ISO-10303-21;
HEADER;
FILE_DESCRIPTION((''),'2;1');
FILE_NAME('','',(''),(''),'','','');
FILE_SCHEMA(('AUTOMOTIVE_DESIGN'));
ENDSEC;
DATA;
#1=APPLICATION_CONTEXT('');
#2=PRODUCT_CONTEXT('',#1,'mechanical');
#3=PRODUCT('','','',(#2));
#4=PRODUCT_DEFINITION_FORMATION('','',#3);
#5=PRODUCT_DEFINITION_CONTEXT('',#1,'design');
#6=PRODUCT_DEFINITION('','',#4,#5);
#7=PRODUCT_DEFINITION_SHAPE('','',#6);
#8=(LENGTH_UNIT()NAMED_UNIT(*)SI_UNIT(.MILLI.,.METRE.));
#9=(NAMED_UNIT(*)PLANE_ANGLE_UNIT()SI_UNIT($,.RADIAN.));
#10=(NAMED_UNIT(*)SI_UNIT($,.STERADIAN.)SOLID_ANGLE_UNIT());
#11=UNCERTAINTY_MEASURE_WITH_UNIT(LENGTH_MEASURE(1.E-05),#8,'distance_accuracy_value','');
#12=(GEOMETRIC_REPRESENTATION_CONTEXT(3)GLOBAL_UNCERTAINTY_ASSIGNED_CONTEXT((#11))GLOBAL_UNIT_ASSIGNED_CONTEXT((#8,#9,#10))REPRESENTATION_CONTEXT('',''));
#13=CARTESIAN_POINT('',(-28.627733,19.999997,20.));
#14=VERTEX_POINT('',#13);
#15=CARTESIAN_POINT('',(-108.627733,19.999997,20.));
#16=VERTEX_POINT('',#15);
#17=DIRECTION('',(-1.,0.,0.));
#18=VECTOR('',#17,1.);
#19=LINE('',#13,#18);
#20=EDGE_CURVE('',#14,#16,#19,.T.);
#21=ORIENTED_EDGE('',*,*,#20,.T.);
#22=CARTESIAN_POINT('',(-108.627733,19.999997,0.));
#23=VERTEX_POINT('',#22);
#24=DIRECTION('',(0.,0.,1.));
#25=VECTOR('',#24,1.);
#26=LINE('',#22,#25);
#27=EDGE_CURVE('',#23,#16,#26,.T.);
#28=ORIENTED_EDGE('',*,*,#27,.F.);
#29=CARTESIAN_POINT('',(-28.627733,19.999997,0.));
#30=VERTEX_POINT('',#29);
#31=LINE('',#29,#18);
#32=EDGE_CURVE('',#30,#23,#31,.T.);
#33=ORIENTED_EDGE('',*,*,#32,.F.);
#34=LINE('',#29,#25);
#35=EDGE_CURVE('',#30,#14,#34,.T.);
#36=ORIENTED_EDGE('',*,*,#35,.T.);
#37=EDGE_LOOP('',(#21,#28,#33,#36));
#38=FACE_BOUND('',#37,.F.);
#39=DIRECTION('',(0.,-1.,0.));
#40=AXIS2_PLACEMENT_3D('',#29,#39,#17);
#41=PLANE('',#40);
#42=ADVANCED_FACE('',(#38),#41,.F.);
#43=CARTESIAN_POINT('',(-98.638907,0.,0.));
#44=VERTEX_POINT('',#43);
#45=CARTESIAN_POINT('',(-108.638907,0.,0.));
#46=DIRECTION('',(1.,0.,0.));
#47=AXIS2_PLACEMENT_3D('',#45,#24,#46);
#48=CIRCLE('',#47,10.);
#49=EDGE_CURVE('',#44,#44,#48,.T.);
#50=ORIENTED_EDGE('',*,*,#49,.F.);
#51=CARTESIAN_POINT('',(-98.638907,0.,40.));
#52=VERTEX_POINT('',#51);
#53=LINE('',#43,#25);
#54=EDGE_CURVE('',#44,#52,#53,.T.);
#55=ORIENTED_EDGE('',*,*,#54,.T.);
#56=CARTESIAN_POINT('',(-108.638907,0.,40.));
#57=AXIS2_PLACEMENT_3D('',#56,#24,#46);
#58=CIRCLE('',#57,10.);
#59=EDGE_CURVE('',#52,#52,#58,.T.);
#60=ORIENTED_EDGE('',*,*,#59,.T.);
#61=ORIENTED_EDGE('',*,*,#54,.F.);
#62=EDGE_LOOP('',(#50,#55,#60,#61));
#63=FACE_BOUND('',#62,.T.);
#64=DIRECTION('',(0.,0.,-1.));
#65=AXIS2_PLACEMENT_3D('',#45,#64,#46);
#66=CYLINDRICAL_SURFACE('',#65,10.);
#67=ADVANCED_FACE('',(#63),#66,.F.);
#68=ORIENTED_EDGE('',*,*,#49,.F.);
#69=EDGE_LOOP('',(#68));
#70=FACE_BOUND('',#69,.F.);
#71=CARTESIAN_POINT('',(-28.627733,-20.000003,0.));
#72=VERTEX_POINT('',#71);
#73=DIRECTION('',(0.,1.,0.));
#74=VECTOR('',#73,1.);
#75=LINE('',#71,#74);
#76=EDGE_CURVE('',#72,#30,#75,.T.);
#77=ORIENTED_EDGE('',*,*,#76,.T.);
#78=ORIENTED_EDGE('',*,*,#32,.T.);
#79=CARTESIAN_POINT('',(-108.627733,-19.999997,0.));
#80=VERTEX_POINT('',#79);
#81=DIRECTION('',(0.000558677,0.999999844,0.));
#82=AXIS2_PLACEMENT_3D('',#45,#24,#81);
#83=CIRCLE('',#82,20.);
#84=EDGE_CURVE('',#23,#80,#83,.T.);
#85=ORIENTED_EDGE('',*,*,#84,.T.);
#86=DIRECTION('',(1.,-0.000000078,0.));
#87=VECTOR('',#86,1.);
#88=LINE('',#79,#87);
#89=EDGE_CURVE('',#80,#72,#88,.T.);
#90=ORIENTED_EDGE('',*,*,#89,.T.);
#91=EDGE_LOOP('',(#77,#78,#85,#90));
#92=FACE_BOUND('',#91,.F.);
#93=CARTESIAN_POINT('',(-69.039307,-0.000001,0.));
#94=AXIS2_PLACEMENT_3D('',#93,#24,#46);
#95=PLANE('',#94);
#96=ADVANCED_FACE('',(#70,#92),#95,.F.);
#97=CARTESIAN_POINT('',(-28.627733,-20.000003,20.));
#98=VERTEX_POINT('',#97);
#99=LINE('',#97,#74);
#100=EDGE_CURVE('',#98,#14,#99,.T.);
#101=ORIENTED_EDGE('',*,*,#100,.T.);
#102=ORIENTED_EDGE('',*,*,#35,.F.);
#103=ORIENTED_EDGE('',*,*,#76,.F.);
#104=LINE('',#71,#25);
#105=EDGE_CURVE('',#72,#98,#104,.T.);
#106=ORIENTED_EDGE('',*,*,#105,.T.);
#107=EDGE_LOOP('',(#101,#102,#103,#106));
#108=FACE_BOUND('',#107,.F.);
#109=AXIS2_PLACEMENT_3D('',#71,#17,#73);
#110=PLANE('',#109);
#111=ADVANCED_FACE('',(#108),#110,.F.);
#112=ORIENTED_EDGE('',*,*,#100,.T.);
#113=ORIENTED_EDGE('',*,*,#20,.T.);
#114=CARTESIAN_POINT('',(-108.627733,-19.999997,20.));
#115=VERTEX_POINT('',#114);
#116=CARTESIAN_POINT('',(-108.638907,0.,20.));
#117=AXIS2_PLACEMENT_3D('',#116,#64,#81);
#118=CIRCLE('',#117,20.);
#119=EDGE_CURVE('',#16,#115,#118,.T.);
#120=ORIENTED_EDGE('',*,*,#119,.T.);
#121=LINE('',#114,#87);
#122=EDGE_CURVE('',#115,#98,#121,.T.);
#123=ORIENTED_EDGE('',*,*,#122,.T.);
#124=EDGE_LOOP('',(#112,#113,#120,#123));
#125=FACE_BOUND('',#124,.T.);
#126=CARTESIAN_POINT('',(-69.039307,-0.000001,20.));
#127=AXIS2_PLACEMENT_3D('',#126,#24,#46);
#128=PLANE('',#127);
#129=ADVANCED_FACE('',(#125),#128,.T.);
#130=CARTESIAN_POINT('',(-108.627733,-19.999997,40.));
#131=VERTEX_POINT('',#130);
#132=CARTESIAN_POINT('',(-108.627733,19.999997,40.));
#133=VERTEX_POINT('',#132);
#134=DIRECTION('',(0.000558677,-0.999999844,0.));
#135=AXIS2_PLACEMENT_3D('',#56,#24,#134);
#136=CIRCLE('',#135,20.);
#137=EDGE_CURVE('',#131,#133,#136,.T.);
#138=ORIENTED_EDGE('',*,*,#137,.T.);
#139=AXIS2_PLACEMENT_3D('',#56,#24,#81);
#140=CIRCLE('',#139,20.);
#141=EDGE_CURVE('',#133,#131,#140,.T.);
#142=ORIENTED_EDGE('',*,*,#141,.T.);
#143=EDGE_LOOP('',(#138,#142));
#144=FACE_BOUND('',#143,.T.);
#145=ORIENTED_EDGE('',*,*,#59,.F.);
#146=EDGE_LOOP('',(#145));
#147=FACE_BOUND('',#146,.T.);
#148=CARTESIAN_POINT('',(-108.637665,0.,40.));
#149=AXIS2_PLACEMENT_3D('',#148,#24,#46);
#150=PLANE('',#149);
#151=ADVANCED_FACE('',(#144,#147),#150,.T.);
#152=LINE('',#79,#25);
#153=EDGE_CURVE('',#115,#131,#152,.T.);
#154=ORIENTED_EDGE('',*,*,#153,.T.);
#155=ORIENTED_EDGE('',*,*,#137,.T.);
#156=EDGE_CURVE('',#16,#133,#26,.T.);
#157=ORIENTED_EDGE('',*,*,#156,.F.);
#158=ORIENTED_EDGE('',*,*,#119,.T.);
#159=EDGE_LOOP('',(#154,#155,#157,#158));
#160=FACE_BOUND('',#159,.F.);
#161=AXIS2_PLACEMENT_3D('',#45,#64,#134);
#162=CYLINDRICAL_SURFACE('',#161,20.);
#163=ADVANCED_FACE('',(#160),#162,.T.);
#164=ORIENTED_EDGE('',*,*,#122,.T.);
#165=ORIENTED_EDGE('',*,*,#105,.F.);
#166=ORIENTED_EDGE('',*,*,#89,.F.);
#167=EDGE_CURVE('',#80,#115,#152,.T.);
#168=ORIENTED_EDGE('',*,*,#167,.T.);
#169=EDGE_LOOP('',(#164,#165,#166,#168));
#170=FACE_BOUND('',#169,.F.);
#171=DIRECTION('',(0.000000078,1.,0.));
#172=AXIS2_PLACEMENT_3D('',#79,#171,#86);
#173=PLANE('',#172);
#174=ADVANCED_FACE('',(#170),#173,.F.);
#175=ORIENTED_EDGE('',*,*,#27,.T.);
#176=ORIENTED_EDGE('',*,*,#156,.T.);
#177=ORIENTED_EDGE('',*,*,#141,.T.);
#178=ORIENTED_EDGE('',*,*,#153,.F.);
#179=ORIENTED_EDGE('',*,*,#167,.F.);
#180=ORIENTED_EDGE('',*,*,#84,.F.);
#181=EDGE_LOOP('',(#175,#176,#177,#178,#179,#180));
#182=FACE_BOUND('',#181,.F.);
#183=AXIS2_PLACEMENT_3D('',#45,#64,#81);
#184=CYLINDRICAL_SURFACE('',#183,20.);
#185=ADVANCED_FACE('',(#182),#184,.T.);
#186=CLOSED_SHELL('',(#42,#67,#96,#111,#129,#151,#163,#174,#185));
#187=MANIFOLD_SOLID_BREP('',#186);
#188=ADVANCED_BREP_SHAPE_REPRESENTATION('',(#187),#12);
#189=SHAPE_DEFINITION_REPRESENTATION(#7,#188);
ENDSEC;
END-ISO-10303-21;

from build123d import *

# Parameters (mm, degrees)
F0_R     = 10
F1_DEPTH = 40
F2_DEPTH = 20


# Not quite as in the source:
# - ends of sketch curves that miss each other by under 0.0002 mm in the source are joined


with BuildPart() as f1:
    # F0 (on Top) → F1 (new body)
    with BuildSketch(Plane.XY):
        with BuildLine():
            ThreePointArc((-108.6277332274, -19.9999968788), (-94.4928212548, -14.1381846275), (-88.6389067712, 0))
            ThreePointArc((-88.6389067712, 0), (-94.4928212535, 14.1381846263), (-108.6277332239, 19.9999968788))
            ThreePointArc((-108.6277332239, 19.9999968788), (-128.6389067712, 1.7e-09), (-108.6277332274, -19.9999968788))
        make_face()
        with Locations((-108.6389067712, 0)):
            Circle(F0_R, mode=Mode.SUBTRACT)
    extrude(amount=F1_DEPTH)

    # F0 (on Top) → F2 (join)
    with BuildSketch(Plane.XY):
        with BuildLine():
            ThreePointArc((-108.6277332239, 19.9999968788), (-94.4928212535, 14.1381846263), (-88.6389067712, 0))
            ThreePointArc((-88.6389067712, 0), (-94.4928212548, -14.1381846275), (-108.6277332274, -19.9999968788))
            Line((-108.6277332274, -19.9999968788), (-28.6277332239, -20.0000031212))
            Line((-28.6277332239, -20.0000031212), (-28.6277332239, 19.9999968788))
            Line((-28.6277332239, 19.9999968788), (-108.6277332239, 19.9999968788))
        make_face()
    extrude(amount=F2_DEPTH)


solid = f1.part
